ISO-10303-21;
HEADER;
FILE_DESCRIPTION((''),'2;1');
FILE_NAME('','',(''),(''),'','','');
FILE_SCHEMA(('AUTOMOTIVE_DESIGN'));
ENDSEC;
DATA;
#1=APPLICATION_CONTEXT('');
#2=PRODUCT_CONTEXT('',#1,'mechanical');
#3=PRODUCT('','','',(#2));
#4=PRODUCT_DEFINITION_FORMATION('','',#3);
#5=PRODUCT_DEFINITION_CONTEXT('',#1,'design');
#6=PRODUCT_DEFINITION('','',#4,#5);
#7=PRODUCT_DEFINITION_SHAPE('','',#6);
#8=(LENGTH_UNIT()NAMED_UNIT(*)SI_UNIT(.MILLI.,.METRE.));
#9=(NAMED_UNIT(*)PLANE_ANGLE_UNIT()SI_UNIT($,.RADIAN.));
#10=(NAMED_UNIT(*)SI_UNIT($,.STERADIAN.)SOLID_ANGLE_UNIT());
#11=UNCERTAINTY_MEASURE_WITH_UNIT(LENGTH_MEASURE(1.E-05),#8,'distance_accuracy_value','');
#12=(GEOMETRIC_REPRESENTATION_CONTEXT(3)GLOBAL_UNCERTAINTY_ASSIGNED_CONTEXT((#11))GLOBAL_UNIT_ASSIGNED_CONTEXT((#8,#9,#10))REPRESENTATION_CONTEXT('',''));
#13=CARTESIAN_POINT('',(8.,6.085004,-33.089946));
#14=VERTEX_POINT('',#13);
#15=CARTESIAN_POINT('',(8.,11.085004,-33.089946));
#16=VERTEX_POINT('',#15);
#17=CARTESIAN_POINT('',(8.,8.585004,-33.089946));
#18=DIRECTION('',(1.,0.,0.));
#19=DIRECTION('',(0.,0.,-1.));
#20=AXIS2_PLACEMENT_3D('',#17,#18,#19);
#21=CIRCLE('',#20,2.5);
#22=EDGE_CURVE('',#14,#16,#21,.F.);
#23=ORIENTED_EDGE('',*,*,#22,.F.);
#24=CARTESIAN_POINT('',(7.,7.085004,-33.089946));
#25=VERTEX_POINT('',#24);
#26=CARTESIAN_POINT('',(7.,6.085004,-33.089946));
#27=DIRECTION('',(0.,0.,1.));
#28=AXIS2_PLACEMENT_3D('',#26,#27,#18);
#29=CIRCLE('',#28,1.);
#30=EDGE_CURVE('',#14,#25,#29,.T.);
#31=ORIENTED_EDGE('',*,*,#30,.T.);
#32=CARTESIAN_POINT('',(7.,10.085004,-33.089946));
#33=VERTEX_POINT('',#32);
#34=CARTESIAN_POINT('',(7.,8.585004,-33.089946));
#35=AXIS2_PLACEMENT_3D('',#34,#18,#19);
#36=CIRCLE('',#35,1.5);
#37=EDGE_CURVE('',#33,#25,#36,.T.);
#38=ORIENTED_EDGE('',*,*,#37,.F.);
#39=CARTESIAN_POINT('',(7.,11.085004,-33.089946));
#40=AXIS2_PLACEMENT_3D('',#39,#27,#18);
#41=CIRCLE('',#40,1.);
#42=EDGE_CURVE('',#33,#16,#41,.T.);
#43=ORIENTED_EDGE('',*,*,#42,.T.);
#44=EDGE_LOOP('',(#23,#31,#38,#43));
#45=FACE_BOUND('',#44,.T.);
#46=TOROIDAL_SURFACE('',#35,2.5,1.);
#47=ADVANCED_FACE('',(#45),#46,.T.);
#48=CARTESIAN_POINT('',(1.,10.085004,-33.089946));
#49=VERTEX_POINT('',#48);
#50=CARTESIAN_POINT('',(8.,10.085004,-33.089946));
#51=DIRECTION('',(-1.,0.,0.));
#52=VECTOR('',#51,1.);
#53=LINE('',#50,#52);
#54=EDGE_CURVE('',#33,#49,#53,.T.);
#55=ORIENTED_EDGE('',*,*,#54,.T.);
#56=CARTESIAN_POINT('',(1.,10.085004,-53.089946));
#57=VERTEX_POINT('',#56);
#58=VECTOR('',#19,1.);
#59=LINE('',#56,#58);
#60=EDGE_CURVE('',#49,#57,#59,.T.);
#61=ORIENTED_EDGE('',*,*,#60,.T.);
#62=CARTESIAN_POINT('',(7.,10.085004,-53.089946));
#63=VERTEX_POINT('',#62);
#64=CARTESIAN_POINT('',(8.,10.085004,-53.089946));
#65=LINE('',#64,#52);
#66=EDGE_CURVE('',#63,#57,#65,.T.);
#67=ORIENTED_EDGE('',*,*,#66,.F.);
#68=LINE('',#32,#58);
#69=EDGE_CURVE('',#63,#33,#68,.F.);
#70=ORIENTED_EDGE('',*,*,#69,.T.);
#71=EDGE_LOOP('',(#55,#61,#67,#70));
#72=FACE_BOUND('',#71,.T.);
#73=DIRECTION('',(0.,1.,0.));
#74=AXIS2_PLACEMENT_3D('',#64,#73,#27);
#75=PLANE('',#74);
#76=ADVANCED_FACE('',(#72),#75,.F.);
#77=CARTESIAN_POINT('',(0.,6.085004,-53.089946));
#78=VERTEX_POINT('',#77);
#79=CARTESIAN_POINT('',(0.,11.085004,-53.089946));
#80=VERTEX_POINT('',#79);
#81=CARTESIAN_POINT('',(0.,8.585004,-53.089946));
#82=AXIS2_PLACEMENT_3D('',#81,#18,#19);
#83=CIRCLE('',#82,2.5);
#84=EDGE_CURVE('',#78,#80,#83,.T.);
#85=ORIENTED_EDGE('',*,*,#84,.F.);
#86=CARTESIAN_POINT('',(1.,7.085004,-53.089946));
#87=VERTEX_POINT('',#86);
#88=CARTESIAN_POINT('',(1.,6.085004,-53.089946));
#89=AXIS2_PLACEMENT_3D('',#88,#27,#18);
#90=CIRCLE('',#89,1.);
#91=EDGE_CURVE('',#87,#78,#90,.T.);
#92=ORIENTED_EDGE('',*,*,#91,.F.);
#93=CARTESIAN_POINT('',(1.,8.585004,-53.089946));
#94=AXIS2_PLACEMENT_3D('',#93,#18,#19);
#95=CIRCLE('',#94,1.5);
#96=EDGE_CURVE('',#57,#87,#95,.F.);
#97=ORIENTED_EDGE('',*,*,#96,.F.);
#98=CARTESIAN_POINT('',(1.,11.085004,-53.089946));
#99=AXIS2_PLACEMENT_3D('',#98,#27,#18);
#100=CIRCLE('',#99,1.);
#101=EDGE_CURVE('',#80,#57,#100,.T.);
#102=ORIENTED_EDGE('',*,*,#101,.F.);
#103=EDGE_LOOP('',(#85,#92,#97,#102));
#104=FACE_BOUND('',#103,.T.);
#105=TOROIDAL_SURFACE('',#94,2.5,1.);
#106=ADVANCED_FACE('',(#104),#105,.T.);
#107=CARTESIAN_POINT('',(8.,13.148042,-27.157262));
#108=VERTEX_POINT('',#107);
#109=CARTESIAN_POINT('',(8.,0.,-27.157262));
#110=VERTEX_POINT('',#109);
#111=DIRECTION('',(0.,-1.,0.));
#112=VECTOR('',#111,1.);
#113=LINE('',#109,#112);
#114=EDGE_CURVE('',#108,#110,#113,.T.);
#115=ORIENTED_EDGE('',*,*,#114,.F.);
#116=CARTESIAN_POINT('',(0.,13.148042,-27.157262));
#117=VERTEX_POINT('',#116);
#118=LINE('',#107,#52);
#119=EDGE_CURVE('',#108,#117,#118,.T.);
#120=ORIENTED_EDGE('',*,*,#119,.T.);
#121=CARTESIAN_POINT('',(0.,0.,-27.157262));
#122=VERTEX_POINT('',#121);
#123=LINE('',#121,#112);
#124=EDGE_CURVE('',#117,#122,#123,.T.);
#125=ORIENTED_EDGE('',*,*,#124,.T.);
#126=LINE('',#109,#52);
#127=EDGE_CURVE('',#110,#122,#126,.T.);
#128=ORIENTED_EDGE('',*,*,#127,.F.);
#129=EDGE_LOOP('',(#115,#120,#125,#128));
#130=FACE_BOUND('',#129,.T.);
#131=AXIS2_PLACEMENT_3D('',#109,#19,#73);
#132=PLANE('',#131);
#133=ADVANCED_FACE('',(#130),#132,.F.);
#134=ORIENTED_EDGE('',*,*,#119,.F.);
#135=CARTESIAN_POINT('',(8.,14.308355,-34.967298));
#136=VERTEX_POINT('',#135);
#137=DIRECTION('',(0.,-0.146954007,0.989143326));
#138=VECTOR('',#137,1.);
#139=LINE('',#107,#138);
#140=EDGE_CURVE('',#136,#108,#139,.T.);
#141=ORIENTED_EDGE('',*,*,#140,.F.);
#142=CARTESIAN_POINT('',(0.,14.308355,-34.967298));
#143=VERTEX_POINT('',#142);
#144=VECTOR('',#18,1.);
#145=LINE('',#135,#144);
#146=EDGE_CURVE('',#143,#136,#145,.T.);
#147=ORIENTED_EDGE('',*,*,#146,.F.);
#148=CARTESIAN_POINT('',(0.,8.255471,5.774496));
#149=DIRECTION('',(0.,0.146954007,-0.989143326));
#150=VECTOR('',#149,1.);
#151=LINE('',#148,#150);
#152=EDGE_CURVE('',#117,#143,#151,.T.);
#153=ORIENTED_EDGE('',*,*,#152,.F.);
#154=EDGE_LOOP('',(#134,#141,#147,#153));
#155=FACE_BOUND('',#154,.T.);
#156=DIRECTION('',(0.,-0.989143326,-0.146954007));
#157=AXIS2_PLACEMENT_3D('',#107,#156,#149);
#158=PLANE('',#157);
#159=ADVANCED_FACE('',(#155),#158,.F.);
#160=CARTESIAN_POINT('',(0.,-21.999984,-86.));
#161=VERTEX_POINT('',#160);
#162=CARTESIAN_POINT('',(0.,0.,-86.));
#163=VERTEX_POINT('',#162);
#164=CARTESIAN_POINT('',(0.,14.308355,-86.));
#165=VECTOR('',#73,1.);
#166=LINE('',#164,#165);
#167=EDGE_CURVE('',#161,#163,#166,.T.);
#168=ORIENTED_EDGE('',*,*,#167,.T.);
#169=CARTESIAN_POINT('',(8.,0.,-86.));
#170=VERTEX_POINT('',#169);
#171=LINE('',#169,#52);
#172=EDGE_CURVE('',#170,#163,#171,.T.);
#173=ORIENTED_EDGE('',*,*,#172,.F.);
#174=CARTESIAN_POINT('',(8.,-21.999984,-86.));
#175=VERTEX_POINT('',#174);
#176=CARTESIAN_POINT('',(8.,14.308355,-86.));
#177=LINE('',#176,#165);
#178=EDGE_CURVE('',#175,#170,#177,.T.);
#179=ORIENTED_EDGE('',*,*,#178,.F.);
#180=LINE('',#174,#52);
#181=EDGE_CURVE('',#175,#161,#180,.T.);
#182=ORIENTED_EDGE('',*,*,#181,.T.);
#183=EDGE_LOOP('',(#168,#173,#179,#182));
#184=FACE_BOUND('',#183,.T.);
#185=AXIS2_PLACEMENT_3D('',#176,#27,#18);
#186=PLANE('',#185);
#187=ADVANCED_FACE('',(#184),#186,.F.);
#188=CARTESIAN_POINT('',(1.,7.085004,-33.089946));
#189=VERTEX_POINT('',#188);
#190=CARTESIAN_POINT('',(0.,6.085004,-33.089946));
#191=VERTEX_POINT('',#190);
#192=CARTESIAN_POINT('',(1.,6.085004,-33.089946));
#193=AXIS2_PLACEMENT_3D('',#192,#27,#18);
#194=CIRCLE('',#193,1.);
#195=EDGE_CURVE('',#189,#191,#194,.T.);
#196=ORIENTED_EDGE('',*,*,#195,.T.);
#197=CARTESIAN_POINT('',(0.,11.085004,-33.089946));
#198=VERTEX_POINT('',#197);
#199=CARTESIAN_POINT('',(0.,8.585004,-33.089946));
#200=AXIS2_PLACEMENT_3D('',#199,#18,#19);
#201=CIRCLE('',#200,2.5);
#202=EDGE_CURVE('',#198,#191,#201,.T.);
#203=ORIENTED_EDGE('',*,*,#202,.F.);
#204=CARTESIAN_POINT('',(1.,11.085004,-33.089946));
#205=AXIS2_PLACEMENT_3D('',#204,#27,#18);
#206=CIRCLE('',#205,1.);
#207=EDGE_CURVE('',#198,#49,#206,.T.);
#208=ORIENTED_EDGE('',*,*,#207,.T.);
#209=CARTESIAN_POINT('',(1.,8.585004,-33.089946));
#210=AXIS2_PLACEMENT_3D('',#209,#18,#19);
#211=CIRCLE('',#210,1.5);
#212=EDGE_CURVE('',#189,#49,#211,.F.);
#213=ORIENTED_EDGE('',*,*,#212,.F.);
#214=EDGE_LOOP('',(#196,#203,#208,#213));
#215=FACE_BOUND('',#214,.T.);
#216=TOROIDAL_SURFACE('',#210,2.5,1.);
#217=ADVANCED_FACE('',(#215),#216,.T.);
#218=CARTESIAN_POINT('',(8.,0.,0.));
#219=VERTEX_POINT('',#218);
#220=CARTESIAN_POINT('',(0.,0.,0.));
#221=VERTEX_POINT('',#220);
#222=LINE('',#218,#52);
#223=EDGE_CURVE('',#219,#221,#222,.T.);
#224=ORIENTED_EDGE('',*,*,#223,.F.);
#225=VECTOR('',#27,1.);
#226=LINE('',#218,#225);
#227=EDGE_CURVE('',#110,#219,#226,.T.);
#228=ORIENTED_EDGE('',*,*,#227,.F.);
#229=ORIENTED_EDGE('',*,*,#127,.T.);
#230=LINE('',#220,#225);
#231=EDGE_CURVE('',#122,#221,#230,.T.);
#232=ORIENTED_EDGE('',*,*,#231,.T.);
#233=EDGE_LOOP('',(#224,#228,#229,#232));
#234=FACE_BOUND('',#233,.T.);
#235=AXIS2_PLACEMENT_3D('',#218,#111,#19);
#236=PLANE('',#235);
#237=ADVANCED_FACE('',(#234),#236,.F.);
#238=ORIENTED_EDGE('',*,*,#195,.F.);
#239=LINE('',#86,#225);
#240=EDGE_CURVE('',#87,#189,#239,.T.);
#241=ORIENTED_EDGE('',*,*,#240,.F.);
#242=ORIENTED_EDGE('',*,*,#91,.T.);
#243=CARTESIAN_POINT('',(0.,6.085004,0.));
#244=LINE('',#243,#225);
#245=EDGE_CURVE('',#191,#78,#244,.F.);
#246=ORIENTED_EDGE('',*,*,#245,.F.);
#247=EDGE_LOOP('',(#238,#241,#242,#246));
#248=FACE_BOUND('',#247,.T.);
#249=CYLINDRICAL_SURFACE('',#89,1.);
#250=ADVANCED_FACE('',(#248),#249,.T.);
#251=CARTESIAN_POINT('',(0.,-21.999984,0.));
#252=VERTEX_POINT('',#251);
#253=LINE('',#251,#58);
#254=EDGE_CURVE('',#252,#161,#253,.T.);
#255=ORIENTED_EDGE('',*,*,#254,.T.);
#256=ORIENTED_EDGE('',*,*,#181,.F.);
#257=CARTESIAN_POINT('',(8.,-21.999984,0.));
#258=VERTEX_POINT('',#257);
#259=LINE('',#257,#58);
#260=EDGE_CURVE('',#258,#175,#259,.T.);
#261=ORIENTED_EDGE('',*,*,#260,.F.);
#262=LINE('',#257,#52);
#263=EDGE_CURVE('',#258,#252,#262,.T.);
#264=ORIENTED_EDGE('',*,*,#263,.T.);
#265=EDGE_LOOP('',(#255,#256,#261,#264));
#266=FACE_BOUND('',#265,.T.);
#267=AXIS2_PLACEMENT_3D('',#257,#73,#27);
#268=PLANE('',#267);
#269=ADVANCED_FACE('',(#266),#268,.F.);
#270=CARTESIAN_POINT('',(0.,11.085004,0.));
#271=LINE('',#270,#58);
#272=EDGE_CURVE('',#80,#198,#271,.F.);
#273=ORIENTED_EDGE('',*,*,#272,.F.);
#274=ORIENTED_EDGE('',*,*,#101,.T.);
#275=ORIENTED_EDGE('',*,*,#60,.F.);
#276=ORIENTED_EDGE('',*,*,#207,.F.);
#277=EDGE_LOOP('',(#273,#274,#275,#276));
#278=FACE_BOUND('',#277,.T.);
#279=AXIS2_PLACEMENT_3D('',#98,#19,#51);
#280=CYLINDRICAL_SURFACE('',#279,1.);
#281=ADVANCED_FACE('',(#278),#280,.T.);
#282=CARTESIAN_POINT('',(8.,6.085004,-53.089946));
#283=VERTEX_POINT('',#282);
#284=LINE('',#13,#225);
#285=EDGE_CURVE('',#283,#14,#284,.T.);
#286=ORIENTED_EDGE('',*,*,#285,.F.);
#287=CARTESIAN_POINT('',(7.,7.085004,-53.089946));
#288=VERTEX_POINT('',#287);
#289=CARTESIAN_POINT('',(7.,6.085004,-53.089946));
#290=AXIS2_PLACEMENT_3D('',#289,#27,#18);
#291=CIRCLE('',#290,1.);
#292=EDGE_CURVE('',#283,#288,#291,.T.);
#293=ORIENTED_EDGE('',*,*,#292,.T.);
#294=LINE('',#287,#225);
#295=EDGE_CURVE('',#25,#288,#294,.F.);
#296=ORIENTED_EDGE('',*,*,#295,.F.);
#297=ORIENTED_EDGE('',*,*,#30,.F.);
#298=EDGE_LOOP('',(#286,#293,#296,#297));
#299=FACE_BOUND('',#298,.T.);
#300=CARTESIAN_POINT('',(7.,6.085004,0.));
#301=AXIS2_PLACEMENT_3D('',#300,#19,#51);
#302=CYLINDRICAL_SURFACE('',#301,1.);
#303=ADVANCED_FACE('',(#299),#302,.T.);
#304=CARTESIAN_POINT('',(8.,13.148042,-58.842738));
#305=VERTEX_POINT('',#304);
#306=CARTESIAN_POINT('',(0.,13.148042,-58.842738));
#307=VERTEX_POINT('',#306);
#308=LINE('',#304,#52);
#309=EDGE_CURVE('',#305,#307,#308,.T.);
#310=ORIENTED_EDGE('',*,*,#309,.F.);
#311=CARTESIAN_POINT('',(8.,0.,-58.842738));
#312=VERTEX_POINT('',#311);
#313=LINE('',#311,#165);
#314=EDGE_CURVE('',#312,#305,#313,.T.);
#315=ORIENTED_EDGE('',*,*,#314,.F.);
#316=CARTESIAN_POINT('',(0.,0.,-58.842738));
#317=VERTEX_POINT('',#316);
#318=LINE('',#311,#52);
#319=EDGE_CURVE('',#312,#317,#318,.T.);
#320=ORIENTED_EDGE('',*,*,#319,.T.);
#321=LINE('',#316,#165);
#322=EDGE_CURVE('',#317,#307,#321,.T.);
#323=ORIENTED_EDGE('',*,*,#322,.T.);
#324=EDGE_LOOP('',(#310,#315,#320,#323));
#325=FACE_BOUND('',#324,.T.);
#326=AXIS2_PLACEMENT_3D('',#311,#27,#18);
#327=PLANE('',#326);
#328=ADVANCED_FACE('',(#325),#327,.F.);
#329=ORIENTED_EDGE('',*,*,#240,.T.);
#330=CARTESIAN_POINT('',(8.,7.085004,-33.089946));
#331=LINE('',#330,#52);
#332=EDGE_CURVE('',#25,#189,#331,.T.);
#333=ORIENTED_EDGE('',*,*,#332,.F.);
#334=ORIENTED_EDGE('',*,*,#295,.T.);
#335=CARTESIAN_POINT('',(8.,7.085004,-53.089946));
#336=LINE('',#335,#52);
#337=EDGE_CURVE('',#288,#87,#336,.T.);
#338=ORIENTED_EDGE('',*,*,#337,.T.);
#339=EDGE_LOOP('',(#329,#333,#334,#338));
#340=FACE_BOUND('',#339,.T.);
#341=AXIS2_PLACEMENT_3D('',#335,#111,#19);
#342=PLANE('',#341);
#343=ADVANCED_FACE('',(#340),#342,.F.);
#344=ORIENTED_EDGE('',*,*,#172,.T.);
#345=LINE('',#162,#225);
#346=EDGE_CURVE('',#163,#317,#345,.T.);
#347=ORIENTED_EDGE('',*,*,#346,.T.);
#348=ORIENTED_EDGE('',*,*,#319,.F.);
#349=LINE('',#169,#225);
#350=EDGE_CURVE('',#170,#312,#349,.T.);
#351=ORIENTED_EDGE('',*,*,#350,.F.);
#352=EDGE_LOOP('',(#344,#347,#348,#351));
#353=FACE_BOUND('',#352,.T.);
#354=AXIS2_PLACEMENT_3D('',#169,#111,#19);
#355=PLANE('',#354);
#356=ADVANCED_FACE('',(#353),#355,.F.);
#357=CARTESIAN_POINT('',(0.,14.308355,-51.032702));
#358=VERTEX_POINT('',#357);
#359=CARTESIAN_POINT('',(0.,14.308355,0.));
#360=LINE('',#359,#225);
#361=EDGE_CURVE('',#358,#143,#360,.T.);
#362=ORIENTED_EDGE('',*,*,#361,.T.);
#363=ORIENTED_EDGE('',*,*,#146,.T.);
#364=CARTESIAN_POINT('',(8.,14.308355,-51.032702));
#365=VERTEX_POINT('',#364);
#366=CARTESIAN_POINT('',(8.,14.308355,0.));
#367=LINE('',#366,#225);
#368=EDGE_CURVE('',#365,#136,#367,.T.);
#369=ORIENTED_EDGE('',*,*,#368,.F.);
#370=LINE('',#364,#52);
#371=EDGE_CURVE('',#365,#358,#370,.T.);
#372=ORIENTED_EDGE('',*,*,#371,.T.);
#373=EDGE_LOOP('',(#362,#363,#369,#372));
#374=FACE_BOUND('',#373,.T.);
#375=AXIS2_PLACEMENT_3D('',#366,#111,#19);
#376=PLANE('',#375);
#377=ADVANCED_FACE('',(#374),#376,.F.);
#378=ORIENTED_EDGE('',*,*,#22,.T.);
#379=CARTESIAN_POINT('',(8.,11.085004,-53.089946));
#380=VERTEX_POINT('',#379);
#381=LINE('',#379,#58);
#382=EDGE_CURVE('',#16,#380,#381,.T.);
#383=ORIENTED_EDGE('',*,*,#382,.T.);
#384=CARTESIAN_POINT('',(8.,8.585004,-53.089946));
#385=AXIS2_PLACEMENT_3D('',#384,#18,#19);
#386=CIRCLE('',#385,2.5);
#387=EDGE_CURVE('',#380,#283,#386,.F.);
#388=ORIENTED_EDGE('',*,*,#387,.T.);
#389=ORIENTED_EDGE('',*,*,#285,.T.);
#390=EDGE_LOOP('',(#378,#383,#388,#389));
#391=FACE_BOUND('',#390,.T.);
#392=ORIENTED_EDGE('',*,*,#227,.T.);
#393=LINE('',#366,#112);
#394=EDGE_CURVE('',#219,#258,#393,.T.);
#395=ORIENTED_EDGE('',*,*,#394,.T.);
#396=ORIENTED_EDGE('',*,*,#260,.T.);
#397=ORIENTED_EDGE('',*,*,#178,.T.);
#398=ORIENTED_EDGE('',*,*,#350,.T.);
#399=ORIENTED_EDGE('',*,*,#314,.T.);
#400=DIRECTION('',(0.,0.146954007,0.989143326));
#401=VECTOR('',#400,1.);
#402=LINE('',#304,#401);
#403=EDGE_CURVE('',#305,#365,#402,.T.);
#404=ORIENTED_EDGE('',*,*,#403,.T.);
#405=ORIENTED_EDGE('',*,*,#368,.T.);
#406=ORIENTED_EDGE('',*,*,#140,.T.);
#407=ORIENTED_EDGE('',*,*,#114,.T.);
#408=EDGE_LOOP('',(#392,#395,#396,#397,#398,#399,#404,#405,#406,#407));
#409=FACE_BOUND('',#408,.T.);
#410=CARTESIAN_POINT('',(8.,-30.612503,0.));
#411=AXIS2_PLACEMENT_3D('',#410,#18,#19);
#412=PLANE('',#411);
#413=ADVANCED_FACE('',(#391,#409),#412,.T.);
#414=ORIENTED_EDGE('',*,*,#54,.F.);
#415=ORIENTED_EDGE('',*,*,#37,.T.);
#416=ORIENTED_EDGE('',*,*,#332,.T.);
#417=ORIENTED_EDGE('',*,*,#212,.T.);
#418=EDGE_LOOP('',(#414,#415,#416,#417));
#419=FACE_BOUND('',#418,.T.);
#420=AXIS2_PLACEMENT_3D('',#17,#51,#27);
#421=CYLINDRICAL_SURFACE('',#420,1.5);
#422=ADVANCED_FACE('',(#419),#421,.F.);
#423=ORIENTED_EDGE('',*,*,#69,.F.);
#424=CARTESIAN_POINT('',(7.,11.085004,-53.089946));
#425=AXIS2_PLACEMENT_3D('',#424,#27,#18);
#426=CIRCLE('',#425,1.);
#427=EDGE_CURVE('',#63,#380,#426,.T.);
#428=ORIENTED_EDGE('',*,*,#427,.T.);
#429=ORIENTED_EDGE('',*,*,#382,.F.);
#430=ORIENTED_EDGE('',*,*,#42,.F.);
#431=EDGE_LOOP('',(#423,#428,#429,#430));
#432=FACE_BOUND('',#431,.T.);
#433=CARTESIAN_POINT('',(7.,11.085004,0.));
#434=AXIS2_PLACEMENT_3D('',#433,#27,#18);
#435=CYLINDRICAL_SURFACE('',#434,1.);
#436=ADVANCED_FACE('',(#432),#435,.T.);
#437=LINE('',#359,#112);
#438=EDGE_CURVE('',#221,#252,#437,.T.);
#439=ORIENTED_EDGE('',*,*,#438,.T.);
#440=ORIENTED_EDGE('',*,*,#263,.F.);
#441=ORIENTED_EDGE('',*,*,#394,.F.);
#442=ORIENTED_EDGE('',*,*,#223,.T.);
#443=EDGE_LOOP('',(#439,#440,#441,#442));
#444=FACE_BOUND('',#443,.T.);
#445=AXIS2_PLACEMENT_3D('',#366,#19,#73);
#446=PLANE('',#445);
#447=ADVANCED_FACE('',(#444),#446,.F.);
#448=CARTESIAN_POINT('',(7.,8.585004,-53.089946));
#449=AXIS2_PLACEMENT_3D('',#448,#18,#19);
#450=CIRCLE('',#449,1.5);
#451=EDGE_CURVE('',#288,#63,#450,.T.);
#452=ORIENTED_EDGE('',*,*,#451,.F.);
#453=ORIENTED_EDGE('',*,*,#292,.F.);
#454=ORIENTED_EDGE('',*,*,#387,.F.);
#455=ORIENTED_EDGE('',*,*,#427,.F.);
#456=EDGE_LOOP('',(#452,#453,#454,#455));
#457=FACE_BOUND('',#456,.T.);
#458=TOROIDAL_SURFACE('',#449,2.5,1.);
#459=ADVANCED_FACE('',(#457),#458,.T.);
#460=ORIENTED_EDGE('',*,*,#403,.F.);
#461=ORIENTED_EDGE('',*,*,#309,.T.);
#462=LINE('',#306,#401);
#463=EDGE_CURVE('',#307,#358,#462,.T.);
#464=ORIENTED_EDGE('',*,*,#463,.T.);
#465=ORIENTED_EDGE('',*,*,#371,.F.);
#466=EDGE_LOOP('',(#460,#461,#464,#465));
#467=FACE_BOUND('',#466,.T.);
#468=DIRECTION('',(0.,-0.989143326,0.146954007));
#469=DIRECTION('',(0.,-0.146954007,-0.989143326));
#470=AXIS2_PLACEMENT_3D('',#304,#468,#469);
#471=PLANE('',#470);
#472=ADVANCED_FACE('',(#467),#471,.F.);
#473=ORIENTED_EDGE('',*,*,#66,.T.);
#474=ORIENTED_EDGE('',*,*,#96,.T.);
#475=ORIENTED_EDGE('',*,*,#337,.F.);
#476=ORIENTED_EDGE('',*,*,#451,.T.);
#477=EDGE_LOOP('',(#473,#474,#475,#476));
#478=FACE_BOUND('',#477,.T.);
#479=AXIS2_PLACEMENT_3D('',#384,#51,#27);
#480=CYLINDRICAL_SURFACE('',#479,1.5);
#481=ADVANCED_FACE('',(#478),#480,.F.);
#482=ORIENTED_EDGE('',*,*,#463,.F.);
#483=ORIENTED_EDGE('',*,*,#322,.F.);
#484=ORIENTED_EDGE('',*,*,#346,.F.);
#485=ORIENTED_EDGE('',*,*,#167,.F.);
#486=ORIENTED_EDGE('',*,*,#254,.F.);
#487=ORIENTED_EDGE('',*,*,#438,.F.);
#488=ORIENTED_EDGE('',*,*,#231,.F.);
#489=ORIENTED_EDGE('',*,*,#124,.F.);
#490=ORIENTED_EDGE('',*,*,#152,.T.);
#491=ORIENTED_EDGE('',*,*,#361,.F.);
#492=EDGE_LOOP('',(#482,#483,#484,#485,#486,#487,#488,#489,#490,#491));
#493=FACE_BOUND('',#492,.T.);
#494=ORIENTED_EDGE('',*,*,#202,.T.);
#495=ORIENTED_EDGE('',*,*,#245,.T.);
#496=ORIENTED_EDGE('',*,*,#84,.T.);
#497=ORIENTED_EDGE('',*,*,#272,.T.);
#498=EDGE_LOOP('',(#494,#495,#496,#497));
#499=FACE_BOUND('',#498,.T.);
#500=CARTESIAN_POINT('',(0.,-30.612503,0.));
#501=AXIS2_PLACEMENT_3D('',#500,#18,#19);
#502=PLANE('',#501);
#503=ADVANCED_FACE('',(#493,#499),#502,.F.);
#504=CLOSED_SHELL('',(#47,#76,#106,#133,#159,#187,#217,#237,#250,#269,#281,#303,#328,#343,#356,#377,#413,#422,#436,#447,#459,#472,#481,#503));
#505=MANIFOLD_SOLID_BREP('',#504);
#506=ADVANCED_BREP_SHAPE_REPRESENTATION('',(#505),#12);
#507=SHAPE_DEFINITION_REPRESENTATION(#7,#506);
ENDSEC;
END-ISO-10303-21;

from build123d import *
from OCP.BRepAlgoAPI import BRepAlgoAPI_Cut
from OCP.TopTools import TopTools_ListOfShape

# Parameters (mm, degrees)
SKETCH_1_W          = 86
SKETCH_1_H          = 44.920858062
EXTRUDE_1_DEPTH     = 8
CUT_EXTRUDE_2_DEPTH = 92.635829898
CUT_EXTRUDE_3_DEPTH = 90.129115951
FILLET_1_R          = 1


with BuildPart() as part:
    # Эскиз1 → Вытянуть1 (new body)
    with BuildSketch(Plane(origin=(0, 0, 0), x_dir=(0, 0, -1), z_dir=(1, 0, 0))):
        with Locations((43, -8.152073661)):
            Rectangle(SKETCH_1_W, SKETCH_1_H)
    extrude(amount=EXTRUDE_1_DEPTH)


with BuildPart() as cut_extrude_2_tool:
    # Эскиз3 → Вырез-Вытянуть2 (new, through all)
    with BuildSketch(Plane.ZY):
        Polygon((0, -30.612502692), (-2.2e-07, -21.999984323), (-86, -21.999984323), (-86, -30.612502692), align=None)
        Polygon((0, 14.387497308), (-3.68e-07, 0), (-27.157261974, 0), (-27.157261974, 13.148042163), (-35.5, 14.387497308), align=None)
        Polygon((-58.842738026, 0), (-58.842738026, 13.148042163), (-50.5, 14.387497308), (-86, 14.387497308), (-85.999999632, 0), align=None)
    extrude(amount=-CUT_EXTRUDE_2_DEPTH)


with BuildPart() as part_1:
    add(part.part)

    # Вырез-Вытянуть2: cut by cut_extrude_2_tool, with a tolerance
    cut_extrude_2_stock = TopTools_ListOfShape()
    cut_extrude_2_stock.Append(part_1.part.wrapped)
    cut_extrude_2_tools = TopTools_ListOfShape()
    cut_extrude_2_tools.Append(cut_extrude_2_tool.part.wrapped)
    cut_extrude_2_cut = BRepAlgoAPI_Cut()
    cut_extrude_2_cut.SetArguments(cut_extrude_2_stock)
    cut_extrude_2_cut.SetTools(cut_extrude_2_tools)
    cut_extrude_2_cut.SetFuzzyValue(0.00001)
    cut_extrude_2_cut.Build()
    add(Compound.cast(cut_extrude_2_cut.Shape()).solids(), mode=Mode.REPLACE)

    # Эскиз4 → Вырез-Вытянуть3 (cut, through all)
    with BuildSketch(Plane.ZY):
        with BuildLine():
            Line((-53.089945506, 10.085003592), (-33.089945506, 10.085003592))
            ThreePointArc((-33.089945506, 10.085003592), (-31.589945506, 8.585003592), (-33.089945506, 7.085003592))
            Line((-33.089945506, 7.085003592), (-53.089945506, 7.085003592))
            ThreePointArc((-53.089945506, 7.085003592), (-54.589945506, 8.585003592), (-53.089945506, 10.085003592))
        make_face()
    extrude(amount=-CUT_EXTRUDE_3_DEPTH, mode=Mode.SUBTRACT)

    # Скругление1
    fillet_1_edges = [part_1.edges().sort_by_distance(p)[0] for p in [
        (8, 8.585003592, -54.589945506),
        (8, 10.085003592, -43.089945506),
        (8, 8.585003592, -31.589945506),
        (8, 7.085003592, -43.089945506),
        (0, 8.585003592, -54.589945506),
        (0, 7.085003592, -43.089945506),
        (0, 8.585003592, -31.589945506),
        (0, 10.085003592, -43.089945506),
    ]]
    fillet(fillet_1_edges, radius=FILLET_1_R)


solid = part_1.part
